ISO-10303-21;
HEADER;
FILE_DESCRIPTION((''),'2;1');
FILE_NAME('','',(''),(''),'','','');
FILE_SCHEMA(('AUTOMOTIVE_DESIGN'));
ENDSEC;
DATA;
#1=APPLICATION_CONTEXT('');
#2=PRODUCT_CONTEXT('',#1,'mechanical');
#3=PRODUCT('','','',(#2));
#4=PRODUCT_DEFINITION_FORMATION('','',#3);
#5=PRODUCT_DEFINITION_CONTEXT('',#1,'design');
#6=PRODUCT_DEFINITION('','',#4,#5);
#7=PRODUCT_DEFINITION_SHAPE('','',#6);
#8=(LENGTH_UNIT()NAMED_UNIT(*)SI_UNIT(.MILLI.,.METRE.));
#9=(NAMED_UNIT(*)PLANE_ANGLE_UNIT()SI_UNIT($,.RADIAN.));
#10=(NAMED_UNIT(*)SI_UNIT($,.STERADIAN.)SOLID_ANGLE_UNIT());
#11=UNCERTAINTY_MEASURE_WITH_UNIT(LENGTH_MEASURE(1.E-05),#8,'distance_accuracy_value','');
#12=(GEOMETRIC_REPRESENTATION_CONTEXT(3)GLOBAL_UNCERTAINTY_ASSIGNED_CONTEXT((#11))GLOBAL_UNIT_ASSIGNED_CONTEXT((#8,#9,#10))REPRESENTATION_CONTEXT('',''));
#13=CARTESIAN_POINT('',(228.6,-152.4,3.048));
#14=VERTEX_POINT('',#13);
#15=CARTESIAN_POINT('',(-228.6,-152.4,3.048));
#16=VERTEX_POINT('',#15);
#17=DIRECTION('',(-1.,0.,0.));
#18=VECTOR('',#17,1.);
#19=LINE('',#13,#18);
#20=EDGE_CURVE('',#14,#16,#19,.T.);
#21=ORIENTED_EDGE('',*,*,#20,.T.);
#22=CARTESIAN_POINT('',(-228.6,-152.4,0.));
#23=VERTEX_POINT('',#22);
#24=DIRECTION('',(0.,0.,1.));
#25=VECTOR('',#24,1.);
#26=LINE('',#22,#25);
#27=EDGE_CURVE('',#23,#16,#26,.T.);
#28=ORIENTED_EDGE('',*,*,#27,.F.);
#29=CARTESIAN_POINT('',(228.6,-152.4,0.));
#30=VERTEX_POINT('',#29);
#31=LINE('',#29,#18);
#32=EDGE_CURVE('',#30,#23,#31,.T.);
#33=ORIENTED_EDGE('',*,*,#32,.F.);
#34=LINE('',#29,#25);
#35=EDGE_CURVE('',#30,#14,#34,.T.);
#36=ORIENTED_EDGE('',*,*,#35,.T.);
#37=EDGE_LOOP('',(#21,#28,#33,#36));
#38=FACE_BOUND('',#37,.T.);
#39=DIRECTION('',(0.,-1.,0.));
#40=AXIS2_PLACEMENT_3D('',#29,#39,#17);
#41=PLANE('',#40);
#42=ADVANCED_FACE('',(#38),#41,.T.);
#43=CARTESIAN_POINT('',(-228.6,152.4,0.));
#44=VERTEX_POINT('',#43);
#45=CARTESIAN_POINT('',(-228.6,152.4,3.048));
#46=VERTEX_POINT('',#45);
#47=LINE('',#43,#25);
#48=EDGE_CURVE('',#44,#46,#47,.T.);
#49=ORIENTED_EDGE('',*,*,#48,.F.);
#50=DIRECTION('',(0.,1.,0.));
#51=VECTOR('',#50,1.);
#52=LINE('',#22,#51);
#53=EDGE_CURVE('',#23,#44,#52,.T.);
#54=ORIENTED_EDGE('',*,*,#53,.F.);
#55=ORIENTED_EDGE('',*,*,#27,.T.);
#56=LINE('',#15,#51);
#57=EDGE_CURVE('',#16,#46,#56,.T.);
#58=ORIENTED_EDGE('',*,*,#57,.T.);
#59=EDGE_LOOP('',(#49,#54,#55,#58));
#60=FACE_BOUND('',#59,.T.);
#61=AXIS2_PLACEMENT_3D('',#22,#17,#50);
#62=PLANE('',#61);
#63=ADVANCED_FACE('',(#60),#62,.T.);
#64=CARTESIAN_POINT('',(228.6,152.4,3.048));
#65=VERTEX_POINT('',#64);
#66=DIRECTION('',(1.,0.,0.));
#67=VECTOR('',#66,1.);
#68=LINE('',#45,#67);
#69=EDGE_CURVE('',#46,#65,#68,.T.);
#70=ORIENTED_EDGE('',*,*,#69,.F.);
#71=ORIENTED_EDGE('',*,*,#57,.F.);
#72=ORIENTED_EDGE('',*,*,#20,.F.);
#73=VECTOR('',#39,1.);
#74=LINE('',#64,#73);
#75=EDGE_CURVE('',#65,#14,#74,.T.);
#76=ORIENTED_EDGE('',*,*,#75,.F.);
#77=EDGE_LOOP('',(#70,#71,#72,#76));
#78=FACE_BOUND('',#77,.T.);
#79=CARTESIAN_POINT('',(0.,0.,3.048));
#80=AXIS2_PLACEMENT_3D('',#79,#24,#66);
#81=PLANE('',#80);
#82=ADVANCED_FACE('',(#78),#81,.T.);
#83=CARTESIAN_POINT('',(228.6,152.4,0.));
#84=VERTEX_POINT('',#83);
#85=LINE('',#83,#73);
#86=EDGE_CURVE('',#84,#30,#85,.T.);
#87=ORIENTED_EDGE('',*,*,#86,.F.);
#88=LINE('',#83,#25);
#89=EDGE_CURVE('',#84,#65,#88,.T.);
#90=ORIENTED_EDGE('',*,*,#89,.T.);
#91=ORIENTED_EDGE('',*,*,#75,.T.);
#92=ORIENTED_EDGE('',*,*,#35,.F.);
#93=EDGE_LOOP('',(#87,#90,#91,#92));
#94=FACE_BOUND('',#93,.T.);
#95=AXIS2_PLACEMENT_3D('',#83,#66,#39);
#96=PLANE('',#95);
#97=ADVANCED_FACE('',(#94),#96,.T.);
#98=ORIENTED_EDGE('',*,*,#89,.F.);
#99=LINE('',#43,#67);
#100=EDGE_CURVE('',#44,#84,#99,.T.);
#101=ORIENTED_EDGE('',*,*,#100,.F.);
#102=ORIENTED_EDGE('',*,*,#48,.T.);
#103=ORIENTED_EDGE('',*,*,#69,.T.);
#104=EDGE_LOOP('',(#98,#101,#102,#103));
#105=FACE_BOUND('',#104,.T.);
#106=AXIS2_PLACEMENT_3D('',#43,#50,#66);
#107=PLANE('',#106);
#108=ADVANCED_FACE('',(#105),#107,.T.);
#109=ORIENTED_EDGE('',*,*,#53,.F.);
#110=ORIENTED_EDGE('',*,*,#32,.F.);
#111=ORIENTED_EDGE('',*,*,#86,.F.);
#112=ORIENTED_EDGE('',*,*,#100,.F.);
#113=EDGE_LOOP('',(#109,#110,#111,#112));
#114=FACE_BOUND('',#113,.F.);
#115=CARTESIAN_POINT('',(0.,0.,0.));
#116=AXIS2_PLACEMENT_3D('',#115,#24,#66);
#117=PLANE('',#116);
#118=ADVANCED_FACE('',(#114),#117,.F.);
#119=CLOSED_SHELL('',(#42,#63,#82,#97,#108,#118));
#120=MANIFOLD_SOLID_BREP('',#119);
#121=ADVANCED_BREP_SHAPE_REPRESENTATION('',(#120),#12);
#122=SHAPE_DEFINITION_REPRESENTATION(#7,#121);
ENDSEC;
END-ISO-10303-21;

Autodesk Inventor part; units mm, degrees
ref_plane "YZ Plane" through (0, 0, 0) normal (1, 0, 0) x (0, 1, 0)
ref_plane "XZ Plane" through (0, 0, 0) normal (0, 1, 0) x (-1, 0, 0)
ref_plane "XY Plane" through (0, 0, 0) normal (0, 0, 1) x (1, 0, 0)
sketch "Sketch1" plane through (0, 0, 0) normal (0, 0, 1) x (1, 0, 0)
  line L0 (0, 118.1576) -> (0, 0)
  line L1 (0, 0) -> (122.0636, 0)
  line L2 (-228.6, 152.4) -> (228.6, 152.4)
  line L3 (228.6, 152.4) -> (228.6, -152.4)
  line L4 (228.6, -152.4) -> (-228.6, -152.4)
  line L5 (-228.6, -152.4) -> (-228.6, 152.4)
  dimension "d0" = 457.2
  dimension "d1" = 304.8
extrude "Plate1" add sketch "Sketch1" along normal blind 3.048
equation "\"BendRadius\" = Thickness"
equation "\"BendReliefWidth\" = Thickness"
equation "\"BendReliefDepth\" = 0.5 * Thickness"
equation "\"CornerReliefSize\" = 4 * Thickness"
equation "\"MinimumRemnant\" = 2 * Thickness"
equation "\"TransitionRadius\" = BendRadius"
equation "\"JacobiRadiusSize\" = BendRadius"
equation "\"GapSize\" = Thickness"
equation "\"d2\" = BendRadius"
equation "\"Thickness\" = 3.048"
properties part number "Fotofab_panel_18x12in"
